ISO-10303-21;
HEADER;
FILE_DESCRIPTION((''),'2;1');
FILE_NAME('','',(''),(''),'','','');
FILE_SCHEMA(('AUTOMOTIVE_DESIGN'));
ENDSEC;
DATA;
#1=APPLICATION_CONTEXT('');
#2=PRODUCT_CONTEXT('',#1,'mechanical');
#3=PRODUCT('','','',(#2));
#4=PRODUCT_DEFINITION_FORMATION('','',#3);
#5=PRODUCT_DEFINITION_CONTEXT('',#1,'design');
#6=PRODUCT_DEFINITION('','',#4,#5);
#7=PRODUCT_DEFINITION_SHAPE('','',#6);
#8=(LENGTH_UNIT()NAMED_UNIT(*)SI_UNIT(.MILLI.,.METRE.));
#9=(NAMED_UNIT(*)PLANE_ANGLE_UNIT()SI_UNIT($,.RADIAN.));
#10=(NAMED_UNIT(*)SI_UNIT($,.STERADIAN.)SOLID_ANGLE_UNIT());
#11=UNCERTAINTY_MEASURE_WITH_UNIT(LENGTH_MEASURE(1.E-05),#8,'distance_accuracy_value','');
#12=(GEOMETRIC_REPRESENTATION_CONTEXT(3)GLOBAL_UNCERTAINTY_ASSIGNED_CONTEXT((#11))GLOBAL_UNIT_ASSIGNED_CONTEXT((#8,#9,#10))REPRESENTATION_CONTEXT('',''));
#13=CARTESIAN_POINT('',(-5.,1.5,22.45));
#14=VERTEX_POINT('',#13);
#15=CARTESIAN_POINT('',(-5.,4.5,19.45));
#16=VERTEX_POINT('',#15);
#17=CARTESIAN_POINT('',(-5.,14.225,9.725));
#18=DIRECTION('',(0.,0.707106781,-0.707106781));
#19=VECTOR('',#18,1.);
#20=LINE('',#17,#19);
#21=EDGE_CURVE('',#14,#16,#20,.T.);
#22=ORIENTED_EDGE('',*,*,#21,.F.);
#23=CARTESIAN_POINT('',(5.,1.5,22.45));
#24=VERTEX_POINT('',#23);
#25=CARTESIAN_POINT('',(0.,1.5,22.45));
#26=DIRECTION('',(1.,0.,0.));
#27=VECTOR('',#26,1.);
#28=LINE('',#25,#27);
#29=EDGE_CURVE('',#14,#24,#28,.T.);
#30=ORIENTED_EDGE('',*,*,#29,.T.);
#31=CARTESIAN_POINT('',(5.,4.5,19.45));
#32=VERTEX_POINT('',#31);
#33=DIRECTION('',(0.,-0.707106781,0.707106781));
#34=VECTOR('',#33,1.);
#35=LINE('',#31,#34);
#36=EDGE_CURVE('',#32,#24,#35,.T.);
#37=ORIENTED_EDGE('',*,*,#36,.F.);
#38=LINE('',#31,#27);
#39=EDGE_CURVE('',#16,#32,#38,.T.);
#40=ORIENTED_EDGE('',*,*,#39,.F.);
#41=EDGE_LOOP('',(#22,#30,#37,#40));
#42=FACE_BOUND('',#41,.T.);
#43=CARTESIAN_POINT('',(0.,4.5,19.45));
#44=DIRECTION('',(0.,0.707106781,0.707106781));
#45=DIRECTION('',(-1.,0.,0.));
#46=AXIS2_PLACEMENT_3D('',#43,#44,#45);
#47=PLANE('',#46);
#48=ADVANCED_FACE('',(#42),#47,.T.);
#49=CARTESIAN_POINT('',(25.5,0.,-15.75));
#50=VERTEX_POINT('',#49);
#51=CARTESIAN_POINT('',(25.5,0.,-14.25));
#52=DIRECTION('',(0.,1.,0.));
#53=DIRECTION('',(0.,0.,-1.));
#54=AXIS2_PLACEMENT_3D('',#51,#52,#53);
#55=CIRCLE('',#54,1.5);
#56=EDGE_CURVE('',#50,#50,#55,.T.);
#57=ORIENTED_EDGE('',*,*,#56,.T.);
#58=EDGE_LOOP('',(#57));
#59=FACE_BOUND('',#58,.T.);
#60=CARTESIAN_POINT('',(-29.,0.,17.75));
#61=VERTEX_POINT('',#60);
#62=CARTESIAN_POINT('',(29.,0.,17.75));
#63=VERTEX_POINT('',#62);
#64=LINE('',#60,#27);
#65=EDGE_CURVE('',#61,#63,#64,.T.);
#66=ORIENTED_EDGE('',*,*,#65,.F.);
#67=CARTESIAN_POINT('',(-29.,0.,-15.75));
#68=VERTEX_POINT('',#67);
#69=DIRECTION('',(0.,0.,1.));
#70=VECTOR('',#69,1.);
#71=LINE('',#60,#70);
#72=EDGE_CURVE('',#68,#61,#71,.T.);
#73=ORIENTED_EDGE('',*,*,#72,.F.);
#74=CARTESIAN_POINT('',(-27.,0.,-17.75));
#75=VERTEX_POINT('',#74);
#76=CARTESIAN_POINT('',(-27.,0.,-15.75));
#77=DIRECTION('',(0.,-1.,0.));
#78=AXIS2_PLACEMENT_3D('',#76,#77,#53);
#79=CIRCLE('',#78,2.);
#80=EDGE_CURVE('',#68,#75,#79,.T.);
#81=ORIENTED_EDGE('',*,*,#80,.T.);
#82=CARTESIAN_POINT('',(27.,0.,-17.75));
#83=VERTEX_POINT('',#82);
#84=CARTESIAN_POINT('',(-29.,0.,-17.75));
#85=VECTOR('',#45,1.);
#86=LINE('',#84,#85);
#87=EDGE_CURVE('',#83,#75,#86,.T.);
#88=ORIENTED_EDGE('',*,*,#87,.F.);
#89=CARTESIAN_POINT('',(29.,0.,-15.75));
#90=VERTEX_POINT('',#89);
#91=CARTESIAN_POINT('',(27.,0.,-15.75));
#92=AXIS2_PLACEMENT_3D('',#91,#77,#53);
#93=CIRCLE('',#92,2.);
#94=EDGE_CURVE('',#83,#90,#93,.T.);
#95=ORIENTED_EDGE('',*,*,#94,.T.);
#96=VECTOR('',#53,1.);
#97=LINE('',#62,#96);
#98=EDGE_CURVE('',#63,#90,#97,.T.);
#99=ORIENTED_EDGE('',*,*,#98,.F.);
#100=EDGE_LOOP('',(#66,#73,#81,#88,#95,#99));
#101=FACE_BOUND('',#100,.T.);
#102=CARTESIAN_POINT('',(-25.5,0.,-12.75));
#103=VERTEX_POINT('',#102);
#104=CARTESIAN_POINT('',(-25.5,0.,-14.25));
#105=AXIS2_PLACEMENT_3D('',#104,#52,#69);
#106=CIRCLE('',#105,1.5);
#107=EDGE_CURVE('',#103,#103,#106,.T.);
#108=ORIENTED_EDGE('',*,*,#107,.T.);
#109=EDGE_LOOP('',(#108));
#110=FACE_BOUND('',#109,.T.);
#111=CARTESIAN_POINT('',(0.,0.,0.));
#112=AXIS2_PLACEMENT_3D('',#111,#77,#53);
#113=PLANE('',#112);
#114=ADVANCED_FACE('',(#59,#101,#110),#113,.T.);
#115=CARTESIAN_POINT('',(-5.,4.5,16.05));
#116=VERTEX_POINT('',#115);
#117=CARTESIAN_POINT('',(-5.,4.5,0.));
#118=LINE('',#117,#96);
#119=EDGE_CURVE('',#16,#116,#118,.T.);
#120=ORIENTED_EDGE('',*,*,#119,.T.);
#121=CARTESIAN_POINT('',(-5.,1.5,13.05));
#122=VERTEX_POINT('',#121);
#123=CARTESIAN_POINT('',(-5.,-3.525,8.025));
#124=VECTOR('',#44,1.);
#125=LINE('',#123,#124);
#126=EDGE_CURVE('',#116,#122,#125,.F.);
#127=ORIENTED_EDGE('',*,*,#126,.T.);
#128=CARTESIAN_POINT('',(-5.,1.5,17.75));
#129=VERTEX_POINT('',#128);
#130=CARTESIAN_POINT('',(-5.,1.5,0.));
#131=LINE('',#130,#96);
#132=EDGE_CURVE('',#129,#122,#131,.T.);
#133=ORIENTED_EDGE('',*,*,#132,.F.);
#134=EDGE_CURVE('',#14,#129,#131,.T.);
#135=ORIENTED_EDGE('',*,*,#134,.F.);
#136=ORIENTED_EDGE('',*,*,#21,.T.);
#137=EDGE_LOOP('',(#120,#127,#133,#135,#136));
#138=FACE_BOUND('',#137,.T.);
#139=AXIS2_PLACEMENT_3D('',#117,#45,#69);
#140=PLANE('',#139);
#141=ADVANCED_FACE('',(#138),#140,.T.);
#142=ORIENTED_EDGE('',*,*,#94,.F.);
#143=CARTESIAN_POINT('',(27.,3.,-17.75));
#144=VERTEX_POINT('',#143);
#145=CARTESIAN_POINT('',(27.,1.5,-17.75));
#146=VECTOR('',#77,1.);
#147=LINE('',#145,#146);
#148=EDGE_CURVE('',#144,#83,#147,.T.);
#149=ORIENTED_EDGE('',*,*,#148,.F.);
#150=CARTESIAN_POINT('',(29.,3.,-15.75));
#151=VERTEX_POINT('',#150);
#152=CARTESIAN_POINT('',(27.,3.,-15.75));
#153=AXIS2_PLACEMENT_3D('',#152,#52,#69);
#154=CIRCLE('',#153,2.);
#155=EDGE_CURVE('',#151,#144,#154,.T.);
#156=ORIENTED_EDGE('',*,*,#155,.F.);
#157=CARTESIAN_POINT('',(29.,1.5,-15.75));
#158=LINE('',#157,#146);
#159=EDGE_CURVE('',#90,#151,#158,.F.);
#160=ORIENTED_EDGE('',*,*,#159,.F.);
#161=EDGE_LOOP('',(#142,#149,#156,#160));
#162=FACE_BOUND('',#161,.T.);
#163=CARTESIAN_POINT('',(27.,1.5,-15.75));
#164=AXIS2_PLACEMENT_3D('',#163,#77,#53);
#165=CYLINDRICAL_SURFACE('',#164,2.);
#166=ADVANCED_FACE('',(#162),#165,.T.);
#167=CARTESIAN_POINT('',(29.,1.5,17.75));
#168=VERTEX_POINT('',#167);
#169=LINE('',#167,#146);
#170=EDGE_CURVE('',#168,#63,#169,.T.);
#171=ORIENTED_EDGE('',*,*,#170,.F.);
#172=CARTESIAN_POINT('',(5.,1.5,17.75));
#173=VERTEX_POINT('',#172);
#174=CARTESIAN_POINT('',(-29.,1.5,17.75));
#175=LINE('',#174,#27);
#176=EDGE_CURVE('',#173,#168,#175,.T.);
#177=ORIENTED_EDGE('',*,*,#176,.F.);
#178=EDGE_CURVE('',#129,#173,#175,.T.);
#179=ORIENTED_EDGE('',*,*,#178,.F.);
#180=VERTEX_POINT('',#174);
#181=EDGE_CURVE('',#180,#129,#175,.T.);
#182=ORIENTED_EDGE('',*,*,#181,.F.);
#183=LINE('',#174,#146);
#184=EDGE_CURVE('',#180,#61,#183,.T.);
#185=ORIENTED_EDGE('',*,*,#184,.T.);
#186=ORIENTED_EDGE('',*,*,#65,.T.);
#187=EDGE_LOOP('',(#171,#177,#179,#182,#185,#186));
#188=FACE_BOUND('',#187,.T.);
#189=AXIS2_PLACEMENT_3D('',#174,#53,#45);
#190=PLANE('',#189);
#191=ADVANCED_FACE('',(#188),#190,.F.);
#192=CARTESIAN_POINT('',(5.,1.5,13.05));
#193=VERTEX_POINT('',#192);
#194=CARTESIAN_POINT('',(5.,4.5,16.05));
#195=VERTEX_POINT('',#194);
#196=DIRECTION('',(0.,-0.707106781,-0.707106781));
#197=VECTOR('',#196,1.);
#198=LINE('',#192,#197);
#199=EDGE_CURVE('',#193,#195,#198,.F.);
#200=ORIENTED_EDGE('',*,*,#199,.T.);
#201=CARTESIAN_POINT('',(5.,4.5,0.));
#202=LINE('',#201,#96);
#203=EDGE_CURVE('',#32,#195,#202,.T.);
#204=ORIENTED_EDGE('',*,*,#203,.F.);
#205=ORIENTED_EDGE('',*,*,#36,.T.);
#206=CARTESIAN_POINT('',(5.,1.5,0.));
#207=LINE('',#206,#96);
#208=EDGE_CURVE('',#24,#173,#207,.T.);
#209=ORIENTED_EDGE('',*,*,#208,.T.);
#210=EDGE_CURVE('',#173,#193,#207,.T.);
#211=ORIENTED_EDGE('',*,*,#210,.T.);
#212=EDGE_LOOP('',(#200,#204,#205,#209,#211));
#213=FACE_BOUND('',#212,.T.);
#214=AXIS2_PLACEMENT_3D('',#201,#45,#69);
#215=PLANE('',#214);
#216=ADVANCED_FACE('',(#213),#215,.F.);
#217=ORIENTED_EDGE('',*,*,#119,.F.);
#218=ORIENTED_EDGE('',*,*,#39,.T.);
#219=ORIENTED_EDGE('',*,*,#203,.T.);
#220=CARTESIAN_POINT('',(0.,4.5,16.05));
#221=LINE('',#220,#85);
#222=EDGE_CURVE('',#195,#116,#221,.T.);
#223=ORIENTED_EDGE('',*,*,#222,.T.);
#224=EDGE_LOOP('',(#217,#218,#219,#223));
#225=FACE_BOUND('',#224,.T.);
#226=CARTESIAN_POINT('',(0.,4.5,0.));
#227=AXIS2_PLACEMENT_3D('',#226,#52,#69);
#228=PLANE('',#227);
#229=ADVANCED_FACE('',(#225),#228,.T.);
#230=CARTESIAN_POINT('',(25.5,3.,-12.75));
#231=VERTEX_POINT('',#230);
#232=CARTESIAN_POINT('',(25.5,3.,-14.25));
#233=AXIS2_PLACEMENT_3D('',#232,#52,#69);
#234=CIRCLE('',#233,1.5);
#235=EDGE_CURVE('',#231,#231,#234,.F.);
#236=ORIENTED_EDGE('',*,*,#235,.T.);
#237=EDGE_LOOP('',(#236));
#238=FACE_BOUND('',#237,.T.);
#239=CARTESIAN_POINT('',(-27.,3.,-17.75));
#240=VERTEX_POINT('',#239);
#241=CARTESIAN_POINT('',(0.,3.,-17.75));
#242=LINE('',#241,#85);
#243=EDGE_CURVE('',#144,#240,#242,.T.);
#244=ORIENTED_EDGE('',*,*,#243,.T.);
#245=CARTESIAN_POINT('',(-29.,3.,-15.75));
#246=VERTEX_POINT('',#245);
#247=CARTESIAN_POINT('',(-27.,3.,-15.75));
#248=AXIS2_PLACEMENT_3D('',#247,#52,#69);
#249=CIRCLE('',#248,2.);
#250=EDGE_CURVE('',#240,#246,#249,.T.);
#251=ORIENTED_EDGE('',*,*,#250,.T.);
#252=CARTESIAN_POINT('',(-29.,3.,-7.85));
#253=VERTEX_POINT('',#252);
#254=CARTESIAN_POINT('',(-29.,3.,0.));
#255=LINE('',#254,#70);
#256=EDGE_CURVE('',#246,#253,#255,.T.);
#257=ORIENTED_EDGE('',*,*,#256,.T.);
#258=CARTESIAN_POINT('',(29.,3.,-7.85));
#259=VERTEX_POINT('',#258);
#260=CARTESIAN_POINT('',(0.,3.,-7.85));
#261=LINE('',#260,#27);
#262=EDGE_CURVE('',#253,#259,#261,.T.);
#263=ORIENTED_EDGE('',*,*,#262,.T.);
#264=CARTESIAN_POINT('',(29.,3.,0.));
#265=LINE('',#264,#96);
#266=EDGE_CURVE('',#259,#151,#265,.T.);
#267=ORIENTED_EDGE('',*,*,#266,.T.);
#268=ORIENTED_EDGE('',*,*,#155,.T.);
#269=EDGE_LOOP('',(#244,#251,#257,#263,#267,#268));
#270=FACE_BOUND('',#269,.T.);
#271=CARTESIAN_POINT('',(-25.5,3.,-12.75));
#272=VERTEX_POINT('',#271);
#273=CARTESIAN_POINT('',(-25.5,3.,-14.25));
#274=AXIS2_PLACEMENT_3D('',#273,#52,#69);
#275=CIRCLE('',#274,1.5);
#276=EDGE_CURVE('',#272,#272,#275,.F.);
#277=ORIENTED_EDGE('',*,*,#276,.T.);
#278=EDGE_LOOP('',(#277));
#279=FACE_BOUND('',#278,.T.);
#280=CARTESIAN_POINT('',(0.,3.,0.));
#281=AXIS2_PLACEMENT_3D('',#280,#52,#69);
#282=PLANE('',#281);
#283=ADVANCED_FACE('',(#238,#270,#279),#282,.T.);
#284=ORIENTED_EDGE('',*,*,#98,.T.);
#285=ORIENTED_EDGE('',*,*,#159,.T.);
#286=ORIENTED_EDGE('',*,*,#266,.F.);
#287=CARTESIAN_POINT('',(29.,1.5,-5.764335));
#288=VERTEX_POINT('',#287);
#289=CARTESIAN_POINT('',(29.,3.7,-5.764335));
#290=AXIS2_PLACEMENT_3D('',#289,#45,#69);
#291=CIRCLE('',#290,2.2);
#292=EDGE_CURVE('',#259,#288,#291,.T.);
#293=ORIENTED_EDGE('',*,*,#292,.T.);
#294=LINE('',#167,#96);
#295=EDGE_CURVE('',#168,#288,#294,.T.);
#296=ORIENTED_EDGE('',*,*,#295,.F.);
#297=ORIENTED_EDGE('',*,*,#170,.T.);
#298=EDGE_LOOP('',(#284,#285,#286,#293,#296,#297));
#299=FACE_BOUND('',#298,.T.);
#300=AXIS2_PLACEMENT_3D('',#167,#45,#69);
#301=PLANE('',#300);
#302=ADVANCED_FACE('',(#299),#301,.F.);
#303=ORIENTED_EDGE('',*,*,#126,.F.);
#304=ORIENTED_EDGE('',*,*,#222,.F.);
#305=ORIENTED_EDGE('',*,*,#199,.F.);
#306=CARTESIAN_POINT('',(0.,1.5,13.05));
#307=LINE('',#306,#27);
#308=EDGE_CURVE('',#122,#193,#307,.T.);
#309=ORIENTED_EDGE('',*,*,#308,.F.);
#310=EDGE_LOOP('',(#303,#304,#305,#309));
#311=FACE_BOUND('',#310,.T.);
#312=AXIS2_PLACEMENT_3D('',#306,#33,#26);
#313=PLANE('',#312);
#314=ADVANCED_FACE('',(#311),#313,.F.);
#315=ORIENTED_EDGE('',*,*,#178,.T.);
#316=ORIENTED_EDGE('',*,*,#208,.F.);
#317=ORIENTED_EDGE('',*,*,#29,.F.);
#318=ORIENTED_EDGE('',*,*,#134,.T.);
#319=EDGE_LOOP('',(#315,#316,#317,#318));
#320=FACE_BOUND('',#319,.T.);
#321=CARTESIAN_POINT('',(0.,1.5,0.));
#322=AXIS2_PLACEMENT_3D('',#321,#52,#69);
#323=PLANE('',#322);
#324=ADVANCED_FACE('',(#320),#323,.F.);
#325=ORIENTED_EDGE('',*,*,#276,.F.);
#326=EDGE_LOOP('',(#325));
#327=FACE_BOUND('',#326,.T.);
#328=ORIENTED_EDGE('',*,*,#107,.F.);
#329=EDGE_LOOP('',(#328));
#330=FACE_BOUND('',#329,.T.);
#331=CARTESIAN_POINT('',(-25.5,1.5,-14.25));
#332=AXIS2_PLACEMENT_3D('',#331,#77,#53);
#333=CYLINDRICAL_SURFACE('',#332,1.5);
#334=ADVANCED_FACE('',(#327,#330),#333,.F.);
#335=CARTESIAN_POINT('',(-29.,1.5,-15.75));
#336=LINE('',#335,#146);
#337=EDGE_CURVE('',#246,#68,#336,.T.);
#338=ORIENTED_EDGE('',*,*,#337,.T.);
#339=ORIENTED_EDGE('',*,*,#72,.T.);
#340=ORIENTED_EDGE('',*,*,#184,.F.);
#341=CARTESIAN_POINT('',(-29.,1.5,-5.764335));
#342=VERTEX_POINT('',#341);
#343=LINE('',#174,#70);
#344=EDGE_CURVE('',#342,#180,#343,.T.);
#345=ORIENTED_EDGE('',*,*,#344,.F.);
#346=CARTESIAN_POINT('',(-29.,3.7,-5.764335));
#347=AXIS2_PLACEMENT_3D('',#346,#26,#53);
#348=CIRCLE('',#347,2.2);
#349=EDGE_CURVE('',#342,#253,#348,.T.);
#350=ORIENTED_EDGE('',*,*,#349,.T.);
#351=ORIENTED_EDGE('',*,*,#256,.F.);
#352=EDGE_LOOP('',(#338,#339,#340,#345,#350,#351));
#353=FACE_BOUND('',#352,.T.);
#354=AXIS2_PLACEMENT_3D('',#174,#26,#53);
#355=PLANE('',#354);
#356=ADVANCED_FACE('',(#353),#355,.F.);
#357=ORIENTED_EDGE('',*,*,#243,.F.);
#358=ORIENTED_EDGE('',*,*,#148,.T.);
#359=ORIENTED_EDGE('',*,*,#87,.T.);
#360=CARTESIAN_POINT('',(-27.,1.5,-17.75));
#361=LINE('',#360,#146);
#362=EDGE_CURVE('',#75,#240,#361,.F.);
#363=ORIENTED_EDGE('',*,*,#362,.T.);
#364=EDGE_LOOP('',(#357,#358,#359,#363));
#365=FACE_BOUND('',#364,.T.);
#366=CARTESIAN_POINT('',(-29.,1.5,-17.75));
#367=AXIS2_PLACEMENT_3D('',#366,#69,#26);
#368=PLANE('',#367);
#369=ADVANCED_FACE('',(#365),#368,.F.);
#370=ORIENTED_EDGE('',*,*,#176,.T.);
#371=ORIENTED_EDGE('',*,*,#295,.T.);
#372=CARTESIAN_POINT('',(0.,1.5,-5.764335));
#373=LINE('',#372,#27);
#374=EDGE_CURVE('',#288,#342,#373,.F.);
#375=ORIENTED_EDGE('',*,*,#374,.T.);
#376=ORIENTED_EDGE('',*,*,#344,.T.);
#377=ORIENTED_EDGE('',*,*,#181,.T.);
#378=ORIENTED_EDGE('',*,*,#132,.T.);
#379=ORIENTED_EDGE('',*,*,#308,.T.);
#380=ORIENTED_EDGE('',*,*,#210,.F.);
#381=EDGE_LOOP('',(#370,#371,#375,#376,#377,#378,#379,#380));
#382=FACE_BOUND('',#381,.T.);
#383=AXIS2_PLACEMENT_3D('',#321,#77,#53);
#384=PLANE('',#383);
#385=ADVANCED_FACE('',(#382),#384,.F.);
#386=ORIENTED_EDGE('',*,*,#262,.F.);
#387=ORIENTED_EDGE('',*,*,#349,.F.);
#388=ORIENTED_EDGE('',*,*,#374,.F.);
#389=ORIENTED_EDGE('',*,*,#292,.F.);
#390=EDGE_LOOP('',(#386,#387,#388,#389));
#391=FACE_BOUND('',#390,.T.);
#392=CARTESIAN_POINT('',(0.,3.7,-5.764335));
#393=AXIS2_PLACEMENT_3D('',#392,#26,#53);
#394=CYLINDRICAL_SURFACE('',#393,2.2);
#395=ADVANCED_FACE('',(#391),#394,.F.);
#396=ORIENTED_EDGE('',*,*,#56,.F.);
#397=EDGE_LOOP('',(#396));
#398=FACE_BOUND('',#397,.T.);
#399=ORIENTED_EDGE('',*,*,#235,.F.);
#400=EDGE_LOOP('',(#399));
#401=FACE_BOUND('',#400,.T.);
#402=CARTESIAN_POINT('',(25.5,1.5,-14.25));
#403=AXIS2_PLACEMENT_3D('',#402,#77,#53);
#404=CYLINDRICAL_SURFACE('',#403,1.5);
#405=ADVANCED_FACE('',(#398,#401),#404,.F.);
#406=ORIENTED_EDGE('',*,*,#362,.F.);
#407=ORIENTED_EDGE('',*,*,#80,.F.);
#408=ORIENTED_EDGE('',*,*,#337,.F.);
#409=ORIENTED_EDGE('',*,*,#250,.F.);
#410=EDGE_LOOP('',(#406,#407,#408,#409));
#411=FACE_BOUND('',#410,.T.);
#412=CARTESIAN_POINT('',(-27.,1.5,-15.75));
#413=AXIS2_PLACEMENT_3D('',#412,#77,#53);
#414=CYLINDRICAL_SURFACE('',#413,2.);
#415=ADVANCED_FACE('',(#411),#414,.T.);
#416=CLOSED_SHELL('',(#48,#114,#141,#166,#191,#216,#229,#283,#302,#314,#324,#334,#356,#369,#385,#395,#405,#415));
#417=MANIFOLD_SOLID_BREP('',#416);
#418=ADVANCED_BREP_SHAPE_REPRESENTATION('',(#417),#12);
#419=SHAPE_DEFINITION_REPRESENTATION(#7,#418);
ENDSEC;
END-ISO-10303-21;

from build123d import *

# Parameters (mm, degrees)
SKETCH1_W           = 58
SKETCH1_H           = 35.5
SKETCH1_R           = 1.5
BOSS_EXTRUDE1_DEPTH = 1.5
SKETCH2_W           = 58
SKETCH2_H           = 9.9
SKETCH2_R           = 1.5
BOSS_EXTRUDE3_DEPTH = 1.5
FILLET1_R           = 2.2
SKETCH2_3_W         = 10
SKETCH2_3_H         = 4.7
BOSS_EXTRUDE4_DEPTH = 3
CHAMFER1_SIZE       = 3
FILLET2_R           = 2


# Some blends are built 0.0001 mm under size
with BuildPart() as part:
    # Sketch1 → Boss-Extrude1 (new body)
    with BuildSketch(Plane(origin=(0, 0, 0), x_dir=(1, 0, 0), z_dir=(0, 1, 0))):
        Rectangle(SKETCH1_W, SKETCH1_H)
        with Locations(Location((-25.5, 14.25, 0), (0, 0, 270))):
            Circle(SKETCH1_R, mode=Mode.SUBTRACT)
        with Locations(Location((25.5, 14.25, 0), (0, 0, 90))):
            Circle(SKETCH1_R, mode=Mode.SUBTRACT)
    extrude(amount=BOSS_EXTRUDE1_DEPTH)

    # Sketch2 → Boss-Extrude3 (add)
    with BuildSketch(Plane(origin=(0, 1.5, 0), x_dir=(1, 0, 0), z_dir=(0, 1, 0))):
        with Locations((0, 12.8)):
            Rectangle(SKETCH2_W, SKETCH2_H)
        with Locations(Location((-25.5, 14.25, 0), (0, 0, 270))):
            Circle(SKETCH2_R, mode=Mode.SUBTRACT)
        with Locations(Location((25.5, 14.25, 0), (0, 0, 90))):
            Circle(SKETCH2_R, mode=Mode.SUBTRACT)
    extrude(amount=BOSS_EXTRUDE3_DEPTH)

    # Fillet1
    # the kernel refuses this fillet: 2.2 mm, written as the material it adds along each edge
    with BuildSketch(Plane(origin=(-29, 1.5, -7.85), x_dir=(0, 0, 1), z_dir=(1, 0, 0))) as fillet1_piece_1:
        with BuildLine():
            CenterArc((2.085665361, -2.2), FILLET1_R, 90, 71.446995465)
            Line((0, -1.5), (-0.041713307, -1.486))
            ThreePointArc((-0.041713307, -1.486), (-0.044, -0.75), (-0.044, 0))
            Line((-0.044, 0), (0, 0.044))
            Line((0, 0.044), (2.085665361, 0.044))
            Line((2.085665361, 0.044), (2.085665361, 0))
        make_face()
    extrude(amount=58)

    # Sketch2<3> → Boss-Extrude4 (add)
    with BuildSketch(Plane(origin=(0, 1.5, 0), x_dir=(1, 0, 0), z_dir=(0, 1, 0))):
        with Locations((0, -20.1)):
            Rectangle(SKETCH2_3_W, SKETCH2_3_H)
        with Locations((0, -15.4)):
            Rectangle(SKETCH2_3_W, SKETCH2_3_H)
    extrude(amount=BOSS_EXTRUDE4_DEPTH)

    # Chamfer1
    chamfer1_edges = [part.edges().sort_by_distance(p)[0] for p in [
        (0, 4.5, 13.05),
        (0, 4.5, 22.45),
    ]]
    chamfer(chamfer1_edges, length=CHAMFER1_SIZE - 0.0001)  # a hair under: the kernel refuses the full size

    # Fillet2
    fillet2_edges = [part.edges().sort_by_distance(p)[0] for p in [
        (-29, 1.5, -17.75),
        (29, 1.5, -17.75),
    ]]
    fillet(fillet2_edges, radius=FILLET2_R)


solid = part.part
